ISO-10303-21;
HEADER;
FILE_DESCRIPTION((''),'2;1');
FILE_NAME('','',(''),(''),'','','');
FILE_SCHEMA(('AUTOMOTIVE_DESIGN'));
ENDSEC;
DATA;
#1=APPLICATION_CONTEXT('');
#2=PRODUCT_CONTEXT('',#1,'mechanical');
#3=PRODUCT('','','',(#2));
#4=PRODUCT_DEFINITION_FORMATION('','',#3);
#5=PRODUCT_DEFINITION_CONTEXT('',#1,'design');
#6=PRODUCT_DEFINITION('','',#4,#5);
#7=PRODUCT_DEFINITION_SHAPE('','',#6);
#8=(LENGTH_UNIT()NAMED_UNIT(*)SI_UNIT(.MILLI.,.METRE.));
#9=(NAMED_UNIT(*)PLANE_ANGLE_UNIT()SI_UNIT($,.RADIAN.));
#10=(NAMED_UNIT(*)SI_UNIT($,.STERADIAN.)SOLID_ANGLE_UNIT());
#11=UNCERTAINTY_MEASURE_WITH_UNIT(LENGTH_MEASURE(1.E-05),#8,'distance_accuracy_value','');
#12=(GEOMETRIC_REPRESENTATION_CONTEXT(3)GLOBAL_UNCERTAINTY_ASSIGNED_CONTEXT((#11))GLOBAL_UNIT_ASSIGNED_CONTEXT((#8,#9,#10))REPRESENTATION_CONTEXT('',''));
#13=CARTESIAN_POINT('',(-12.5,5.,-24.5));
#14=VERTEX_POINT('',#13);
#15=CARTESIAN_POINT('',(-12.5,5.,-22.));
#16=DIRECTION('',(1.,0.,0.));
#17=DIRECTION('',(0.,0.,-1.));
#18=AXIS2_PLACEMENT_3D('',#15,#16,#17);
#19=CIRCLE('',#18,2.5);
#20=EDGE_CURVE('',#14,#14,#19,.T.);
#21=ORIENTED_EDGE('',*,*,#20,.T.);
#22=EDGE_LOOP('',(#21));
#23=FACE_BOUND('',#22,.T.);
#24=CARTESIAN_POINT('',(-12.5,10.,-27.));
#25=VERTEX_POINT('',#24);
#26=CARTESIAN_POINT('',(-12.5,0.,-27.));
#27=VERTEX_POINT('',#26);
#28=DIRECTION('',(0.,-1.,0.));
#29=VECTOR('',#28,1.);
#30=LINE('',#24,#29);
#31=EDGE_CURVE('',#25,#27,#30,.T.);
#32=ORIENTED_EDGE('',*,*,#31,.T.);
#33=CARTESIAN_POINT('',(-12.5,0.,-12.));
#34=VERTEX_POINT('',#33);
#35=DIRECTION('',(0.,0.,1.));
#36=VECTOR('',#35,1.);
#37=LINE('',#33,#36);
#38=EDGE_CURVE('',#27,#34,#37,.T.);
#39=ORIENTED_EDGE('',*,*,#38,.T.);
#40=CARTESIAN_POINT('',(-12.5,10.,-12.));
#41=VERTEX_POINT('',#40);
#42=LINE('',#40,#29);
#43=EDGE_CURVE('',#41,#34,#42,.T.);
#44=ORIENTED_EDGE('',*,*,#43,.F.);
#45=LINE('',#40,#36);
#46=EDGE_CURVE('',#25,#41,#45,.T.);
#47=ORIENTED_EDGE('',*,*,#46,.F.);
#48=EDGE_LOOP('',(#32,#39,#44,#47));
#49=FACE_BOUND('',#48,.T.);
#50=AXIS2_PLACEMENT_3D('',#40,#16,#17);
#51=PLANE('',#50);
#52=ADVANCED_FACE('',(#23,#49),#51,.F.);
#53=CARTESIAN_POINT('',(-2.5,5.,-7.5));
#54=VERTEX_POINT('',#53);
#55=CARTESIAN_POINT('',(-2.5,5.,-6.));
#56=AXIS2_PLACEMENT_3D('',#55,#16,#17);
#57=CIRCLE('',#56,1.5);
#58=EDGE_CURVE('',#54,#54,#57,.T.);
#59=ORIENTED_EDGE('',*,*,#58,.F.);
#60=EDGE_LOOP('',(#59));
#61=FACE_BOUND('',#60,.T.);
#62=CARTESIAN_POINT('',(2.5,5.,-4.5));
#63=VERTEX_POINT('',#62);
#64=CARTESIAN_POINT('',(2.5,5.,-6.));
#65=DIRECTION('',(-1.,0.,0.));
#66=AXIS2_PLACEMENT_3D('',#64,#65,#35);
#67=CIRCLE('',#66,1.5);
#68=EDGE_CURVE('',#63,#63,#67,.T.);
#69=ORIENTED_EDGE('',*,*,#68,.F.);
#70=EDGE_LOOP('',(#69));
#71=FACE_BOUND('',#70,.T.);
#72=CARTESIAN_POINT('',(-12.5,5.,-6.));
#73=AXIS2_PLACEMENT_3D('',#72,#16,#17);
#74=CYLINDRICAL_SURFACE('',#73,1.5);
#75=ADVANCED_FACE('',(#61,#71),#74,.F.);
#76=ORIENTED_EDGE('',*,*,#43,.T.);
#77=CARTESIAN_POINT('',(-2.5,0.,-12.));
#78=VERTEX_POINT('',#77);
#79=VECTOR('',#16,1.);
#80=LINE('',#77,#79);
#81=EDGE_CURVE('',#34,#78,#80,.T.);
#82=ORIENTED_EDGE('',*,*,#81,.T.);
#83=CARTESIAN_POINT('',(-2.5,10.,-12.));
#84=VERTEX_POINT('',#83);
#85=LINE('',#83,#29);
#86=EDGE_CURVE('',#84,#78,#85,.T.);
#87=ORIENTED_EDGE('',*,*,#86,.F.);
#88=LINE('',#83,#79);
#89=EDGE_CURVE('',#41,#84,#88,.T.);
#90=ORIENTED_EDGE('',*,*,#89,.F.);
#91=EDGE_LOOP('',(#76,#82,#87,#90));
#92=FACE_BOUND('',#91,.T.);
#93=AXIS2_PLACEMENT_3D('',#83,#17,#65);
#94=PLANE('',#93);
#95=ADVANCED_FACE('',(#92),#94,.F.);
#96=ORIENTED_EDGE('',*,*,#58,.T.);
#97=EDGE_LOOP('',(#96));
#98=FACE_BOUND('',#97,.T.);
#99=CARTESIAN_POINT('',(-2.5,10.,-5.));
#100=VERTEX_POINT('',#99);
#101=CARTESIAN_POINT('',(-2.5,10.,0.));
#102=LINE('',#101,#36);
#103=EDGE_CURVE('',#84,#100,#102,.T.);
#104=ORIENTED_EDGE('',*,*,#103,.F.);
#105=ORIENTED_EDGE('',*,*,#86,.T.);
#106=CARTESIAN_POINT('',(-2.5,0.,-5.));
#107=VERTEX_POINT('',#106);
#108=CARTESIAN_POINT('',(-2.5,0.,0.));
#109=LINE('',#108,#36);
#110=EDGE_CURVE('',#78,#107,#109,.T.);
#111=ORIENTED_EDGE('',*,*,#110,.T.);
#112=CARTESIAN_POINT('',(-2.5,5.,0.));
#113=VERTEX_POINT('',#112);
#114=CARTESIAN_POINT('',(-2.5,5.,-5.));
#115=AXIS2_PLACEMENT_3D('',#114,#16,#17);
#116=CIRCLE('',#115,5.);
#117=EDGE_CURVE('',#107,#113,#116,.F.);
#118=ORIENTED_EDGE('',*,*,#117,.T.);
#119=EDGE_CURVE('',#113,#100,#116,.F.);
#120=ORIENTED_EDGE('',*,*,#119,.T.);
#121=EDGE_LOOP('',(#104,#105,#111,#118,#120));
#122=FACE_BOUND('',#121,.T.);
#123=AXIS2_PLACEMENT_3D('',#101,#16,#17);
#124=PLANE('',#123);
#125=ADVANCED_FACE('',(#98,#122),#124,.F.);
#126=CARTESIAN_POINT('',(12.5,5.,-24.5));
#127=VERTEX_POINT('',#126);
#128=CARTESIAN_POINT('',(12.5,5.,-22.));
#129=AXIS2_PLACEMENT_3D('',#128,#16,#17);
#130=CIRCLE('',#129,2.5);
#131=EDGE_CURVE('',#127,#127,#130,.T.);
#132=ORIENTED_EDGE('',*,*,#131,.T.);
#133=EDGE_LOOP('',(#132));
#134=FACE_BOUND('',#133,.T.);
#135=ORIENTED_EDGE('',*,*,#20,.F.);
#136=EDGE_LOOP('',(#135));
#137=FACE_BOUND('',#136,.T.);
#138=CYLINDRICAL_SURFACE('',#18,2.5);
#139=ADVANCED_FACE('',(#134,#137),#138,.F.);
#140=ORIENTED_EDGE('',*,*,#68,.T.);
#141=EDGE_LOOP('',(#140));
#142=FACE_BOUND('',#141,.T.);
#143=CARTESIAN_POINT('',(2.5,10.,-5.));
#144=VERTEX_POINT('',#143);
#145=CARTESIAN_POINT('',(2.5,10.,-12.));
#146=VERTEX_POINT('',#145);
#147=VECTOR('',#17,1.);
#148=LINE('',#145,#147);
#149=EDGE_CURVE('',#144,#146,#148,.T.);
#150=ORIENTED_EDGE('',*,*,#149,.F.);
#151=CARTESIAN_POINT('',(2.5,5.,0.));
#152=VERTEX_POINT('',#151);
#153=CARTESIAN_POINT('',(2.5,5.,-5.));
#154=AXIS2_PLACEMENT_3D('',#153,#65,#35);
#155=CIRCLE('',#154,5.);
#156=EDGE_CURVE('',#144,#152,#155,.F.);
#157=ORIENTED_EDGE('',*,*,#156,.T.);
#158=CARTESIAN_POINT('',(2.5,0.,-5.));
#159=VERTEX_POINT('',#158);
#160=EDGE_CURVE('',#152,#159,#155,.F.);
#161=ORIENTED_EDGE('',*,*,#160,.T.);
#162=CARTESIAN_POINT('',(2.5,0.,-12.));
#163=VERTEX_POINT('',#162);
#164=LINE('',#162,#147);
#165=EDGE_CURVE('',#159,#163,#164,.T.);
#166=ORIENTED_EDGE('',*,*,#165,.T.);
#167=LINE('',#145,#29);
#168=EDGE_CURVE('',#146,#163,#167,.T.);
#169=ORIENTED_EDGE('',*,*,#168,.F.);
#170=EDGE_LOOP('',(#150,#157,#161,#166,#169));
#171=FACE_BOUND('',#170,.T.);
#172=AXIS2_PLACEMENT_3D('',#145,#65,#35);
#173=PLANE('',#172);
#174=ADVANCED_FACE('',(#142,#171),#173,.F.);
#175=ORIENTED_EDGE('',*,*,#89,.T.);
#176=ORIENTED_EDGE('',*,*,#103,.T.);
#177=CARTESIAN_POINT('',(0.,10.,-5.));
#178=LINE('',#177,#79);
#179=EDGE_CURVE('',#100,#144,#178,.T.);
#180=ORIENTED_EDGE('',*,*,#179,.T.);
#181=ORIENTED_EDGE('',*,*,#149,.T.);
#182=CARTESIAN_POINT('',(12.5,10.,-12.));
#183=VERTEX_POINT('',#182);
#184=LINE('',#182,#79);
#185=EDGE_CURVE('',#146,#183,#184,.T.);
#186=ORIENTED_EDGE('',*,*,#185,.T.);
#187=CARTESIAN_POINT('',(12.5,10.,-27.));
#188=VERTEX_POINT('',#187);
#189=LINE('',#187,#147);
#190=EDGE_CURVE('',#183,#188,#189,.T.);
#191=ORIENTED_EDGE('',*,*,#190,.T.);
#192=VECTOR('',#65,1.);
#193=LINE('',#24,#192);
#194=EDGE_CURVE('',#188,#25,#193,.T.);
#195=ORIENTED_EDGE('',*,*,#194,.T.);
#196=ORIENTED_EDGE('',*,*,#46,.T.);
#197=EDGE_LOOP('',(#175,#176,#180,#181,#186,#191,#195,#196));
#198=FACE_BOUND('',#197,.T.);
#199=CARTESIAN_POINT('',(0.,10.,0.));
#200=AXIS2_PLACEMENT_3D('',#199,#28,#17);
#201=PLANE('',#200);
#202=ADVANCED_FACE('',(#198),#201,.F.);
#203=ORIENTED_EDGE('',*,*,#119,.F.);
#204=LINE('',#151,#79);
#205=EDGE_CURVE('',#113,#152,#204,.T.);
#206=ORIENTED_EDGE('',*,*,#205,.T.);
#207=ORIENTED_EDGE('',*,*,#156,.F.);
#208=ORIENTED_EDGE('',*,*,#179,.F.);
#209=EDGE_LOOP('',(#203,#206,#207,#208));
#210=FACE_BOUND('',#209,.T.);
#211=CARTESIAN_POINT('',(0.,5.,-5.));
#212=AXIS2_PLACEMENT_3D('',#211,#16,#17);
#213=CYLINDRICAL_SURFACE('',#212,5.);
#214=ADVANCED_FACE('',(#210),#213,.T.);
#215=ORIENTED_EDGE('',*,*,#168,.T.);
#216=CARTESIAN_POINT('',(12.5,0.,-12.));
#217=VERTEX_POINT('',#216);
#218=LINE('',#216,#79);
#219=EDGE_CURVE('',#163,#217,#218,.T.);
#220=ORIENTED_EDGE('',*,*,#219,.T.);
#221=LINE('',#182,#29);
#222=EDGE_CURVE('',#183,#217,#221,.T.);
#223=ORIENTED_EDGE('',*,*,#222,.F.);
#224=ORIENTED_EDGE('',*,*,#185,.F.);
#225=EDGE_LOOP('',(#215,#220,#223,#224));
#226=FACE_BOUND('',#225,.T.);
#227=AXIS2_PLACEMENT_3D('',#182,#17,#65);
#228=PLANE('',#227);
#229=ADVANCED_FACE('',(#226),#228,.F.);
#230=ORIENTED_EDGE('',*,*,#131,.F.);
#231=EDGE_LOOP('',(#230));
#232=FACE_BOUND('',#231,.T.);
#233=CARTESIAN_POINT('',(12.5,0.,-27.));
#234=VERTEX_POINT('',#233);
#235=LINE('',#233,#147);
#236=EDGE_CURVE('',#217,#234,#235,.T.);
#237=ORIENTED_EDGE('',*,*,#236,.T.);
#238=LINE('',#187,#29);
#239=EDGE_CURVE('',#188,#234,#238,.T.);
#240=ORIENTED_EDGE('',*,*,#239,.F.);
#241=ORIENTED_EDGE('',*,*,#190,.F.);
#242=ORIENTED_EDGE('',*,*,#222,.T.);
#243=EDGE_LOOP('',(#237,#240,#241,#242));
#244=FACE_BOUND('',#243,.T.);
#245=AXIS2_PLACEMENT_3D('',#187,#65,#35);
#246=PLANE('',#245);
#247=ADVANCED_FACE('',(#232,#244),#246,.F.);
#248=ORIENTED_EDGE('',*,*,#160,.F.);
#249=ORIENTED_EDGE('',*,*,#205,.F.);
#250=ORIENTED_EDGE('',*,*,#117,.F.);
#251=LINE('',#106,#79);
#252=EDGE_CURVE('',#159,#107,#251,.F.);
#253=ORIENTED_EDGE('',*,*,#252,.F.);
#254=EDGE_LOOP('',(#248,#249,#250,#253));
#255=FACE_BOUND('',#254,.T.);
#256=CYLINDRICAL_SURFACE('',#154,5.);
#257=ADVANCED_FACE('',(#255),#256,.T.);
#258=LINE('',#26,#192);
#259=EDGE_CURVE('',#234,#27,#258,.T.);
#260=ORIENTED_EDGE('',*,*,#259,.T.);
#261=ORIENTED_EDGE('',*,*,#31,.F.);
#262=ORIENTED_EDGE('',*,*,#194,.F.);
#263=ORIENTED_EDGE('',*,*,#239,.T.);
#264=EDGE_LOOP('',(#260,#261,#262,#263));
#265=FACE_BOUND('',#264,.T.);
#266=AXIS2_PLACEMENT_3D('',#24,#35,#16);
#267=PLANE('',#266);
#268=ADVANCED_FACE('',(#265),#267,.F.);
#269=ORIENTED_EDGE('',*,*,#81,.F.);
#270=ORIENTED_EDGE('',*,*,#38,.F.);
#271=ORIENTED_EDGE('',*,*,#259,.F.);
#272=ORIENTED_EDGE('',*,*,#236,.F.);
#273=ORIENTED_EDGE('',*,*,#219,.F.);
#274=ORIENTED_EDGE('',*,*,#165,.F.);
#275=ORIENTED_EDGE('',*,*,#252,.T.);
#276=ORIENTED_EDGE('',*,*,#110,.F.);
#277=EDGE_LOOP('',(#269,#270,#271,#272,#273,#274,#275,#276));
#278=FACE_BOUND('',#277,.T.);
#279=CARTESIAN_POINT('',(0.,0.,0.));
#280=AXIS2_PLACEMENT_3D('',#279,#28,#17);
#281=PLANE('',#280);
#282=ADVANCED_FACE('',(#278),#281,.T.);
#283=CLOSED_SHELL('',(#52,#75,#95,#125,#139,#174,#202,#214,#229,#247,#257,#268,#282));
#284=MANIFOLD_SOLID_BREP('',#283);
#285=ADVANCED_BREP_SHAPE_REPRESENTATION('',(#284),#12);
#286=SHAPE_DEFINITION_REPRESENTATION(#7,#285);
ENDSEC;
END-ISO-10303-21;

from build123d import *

# Parameters (mm, degrees)
BOSS_EXTRUDE1_DEPTH = 10
SKETCH2_R           = 2.5
SKETCH2_R_2         = 1.5
CUT_EXTRUDE1_DEPTH  = 39.13135193
FILLET1_R           = 5


with BuildPart() as part:
    # Sketch1 → Boss-Extrude1 (new body)
    with BuildSketch(Plane(origin=(0, 0, 0), x_dir=(1, 0, 0), z_dir=(0, 1, 0))):
        Polygon((2.5, 0), (-2.5, 0), (-2.5, 12), (-12.5, 12), (-12.5, 27), (12.5, 27), (12.5, 12), (2.5, 12), align=None)
    extrude(amount=BOSS_EXTRUDE1_DEPTH)

    # Sketch2 → Cut-Extrude1 (cut, through all)
    with BuildSketch(Plane(origin=(12.5, 0, 0), x_dir=(0, 0, -1), z_dir=(1, 0, 0))):
        with Locations((22, 5)):
            Circle(SKETCH2_R)
        with Locations((6, 5)):
            Circle(SKETCH2_R_2)
    extrude(amount=-CUT_EXTRUDE1_DEPTH, mode=Mode.SUBTRACT)

    # Fillet1
    fillet1_edges = [part.edges().sort_by_distance(p)[0] for p in [
        (0, 10, 0),
        (0, 0, 0),
    ]]
    fillet(fillet1_edges, radius=FILLET1_R - 0.0001)  # a hair under: the kernel refuses the full size


solid = part.part
